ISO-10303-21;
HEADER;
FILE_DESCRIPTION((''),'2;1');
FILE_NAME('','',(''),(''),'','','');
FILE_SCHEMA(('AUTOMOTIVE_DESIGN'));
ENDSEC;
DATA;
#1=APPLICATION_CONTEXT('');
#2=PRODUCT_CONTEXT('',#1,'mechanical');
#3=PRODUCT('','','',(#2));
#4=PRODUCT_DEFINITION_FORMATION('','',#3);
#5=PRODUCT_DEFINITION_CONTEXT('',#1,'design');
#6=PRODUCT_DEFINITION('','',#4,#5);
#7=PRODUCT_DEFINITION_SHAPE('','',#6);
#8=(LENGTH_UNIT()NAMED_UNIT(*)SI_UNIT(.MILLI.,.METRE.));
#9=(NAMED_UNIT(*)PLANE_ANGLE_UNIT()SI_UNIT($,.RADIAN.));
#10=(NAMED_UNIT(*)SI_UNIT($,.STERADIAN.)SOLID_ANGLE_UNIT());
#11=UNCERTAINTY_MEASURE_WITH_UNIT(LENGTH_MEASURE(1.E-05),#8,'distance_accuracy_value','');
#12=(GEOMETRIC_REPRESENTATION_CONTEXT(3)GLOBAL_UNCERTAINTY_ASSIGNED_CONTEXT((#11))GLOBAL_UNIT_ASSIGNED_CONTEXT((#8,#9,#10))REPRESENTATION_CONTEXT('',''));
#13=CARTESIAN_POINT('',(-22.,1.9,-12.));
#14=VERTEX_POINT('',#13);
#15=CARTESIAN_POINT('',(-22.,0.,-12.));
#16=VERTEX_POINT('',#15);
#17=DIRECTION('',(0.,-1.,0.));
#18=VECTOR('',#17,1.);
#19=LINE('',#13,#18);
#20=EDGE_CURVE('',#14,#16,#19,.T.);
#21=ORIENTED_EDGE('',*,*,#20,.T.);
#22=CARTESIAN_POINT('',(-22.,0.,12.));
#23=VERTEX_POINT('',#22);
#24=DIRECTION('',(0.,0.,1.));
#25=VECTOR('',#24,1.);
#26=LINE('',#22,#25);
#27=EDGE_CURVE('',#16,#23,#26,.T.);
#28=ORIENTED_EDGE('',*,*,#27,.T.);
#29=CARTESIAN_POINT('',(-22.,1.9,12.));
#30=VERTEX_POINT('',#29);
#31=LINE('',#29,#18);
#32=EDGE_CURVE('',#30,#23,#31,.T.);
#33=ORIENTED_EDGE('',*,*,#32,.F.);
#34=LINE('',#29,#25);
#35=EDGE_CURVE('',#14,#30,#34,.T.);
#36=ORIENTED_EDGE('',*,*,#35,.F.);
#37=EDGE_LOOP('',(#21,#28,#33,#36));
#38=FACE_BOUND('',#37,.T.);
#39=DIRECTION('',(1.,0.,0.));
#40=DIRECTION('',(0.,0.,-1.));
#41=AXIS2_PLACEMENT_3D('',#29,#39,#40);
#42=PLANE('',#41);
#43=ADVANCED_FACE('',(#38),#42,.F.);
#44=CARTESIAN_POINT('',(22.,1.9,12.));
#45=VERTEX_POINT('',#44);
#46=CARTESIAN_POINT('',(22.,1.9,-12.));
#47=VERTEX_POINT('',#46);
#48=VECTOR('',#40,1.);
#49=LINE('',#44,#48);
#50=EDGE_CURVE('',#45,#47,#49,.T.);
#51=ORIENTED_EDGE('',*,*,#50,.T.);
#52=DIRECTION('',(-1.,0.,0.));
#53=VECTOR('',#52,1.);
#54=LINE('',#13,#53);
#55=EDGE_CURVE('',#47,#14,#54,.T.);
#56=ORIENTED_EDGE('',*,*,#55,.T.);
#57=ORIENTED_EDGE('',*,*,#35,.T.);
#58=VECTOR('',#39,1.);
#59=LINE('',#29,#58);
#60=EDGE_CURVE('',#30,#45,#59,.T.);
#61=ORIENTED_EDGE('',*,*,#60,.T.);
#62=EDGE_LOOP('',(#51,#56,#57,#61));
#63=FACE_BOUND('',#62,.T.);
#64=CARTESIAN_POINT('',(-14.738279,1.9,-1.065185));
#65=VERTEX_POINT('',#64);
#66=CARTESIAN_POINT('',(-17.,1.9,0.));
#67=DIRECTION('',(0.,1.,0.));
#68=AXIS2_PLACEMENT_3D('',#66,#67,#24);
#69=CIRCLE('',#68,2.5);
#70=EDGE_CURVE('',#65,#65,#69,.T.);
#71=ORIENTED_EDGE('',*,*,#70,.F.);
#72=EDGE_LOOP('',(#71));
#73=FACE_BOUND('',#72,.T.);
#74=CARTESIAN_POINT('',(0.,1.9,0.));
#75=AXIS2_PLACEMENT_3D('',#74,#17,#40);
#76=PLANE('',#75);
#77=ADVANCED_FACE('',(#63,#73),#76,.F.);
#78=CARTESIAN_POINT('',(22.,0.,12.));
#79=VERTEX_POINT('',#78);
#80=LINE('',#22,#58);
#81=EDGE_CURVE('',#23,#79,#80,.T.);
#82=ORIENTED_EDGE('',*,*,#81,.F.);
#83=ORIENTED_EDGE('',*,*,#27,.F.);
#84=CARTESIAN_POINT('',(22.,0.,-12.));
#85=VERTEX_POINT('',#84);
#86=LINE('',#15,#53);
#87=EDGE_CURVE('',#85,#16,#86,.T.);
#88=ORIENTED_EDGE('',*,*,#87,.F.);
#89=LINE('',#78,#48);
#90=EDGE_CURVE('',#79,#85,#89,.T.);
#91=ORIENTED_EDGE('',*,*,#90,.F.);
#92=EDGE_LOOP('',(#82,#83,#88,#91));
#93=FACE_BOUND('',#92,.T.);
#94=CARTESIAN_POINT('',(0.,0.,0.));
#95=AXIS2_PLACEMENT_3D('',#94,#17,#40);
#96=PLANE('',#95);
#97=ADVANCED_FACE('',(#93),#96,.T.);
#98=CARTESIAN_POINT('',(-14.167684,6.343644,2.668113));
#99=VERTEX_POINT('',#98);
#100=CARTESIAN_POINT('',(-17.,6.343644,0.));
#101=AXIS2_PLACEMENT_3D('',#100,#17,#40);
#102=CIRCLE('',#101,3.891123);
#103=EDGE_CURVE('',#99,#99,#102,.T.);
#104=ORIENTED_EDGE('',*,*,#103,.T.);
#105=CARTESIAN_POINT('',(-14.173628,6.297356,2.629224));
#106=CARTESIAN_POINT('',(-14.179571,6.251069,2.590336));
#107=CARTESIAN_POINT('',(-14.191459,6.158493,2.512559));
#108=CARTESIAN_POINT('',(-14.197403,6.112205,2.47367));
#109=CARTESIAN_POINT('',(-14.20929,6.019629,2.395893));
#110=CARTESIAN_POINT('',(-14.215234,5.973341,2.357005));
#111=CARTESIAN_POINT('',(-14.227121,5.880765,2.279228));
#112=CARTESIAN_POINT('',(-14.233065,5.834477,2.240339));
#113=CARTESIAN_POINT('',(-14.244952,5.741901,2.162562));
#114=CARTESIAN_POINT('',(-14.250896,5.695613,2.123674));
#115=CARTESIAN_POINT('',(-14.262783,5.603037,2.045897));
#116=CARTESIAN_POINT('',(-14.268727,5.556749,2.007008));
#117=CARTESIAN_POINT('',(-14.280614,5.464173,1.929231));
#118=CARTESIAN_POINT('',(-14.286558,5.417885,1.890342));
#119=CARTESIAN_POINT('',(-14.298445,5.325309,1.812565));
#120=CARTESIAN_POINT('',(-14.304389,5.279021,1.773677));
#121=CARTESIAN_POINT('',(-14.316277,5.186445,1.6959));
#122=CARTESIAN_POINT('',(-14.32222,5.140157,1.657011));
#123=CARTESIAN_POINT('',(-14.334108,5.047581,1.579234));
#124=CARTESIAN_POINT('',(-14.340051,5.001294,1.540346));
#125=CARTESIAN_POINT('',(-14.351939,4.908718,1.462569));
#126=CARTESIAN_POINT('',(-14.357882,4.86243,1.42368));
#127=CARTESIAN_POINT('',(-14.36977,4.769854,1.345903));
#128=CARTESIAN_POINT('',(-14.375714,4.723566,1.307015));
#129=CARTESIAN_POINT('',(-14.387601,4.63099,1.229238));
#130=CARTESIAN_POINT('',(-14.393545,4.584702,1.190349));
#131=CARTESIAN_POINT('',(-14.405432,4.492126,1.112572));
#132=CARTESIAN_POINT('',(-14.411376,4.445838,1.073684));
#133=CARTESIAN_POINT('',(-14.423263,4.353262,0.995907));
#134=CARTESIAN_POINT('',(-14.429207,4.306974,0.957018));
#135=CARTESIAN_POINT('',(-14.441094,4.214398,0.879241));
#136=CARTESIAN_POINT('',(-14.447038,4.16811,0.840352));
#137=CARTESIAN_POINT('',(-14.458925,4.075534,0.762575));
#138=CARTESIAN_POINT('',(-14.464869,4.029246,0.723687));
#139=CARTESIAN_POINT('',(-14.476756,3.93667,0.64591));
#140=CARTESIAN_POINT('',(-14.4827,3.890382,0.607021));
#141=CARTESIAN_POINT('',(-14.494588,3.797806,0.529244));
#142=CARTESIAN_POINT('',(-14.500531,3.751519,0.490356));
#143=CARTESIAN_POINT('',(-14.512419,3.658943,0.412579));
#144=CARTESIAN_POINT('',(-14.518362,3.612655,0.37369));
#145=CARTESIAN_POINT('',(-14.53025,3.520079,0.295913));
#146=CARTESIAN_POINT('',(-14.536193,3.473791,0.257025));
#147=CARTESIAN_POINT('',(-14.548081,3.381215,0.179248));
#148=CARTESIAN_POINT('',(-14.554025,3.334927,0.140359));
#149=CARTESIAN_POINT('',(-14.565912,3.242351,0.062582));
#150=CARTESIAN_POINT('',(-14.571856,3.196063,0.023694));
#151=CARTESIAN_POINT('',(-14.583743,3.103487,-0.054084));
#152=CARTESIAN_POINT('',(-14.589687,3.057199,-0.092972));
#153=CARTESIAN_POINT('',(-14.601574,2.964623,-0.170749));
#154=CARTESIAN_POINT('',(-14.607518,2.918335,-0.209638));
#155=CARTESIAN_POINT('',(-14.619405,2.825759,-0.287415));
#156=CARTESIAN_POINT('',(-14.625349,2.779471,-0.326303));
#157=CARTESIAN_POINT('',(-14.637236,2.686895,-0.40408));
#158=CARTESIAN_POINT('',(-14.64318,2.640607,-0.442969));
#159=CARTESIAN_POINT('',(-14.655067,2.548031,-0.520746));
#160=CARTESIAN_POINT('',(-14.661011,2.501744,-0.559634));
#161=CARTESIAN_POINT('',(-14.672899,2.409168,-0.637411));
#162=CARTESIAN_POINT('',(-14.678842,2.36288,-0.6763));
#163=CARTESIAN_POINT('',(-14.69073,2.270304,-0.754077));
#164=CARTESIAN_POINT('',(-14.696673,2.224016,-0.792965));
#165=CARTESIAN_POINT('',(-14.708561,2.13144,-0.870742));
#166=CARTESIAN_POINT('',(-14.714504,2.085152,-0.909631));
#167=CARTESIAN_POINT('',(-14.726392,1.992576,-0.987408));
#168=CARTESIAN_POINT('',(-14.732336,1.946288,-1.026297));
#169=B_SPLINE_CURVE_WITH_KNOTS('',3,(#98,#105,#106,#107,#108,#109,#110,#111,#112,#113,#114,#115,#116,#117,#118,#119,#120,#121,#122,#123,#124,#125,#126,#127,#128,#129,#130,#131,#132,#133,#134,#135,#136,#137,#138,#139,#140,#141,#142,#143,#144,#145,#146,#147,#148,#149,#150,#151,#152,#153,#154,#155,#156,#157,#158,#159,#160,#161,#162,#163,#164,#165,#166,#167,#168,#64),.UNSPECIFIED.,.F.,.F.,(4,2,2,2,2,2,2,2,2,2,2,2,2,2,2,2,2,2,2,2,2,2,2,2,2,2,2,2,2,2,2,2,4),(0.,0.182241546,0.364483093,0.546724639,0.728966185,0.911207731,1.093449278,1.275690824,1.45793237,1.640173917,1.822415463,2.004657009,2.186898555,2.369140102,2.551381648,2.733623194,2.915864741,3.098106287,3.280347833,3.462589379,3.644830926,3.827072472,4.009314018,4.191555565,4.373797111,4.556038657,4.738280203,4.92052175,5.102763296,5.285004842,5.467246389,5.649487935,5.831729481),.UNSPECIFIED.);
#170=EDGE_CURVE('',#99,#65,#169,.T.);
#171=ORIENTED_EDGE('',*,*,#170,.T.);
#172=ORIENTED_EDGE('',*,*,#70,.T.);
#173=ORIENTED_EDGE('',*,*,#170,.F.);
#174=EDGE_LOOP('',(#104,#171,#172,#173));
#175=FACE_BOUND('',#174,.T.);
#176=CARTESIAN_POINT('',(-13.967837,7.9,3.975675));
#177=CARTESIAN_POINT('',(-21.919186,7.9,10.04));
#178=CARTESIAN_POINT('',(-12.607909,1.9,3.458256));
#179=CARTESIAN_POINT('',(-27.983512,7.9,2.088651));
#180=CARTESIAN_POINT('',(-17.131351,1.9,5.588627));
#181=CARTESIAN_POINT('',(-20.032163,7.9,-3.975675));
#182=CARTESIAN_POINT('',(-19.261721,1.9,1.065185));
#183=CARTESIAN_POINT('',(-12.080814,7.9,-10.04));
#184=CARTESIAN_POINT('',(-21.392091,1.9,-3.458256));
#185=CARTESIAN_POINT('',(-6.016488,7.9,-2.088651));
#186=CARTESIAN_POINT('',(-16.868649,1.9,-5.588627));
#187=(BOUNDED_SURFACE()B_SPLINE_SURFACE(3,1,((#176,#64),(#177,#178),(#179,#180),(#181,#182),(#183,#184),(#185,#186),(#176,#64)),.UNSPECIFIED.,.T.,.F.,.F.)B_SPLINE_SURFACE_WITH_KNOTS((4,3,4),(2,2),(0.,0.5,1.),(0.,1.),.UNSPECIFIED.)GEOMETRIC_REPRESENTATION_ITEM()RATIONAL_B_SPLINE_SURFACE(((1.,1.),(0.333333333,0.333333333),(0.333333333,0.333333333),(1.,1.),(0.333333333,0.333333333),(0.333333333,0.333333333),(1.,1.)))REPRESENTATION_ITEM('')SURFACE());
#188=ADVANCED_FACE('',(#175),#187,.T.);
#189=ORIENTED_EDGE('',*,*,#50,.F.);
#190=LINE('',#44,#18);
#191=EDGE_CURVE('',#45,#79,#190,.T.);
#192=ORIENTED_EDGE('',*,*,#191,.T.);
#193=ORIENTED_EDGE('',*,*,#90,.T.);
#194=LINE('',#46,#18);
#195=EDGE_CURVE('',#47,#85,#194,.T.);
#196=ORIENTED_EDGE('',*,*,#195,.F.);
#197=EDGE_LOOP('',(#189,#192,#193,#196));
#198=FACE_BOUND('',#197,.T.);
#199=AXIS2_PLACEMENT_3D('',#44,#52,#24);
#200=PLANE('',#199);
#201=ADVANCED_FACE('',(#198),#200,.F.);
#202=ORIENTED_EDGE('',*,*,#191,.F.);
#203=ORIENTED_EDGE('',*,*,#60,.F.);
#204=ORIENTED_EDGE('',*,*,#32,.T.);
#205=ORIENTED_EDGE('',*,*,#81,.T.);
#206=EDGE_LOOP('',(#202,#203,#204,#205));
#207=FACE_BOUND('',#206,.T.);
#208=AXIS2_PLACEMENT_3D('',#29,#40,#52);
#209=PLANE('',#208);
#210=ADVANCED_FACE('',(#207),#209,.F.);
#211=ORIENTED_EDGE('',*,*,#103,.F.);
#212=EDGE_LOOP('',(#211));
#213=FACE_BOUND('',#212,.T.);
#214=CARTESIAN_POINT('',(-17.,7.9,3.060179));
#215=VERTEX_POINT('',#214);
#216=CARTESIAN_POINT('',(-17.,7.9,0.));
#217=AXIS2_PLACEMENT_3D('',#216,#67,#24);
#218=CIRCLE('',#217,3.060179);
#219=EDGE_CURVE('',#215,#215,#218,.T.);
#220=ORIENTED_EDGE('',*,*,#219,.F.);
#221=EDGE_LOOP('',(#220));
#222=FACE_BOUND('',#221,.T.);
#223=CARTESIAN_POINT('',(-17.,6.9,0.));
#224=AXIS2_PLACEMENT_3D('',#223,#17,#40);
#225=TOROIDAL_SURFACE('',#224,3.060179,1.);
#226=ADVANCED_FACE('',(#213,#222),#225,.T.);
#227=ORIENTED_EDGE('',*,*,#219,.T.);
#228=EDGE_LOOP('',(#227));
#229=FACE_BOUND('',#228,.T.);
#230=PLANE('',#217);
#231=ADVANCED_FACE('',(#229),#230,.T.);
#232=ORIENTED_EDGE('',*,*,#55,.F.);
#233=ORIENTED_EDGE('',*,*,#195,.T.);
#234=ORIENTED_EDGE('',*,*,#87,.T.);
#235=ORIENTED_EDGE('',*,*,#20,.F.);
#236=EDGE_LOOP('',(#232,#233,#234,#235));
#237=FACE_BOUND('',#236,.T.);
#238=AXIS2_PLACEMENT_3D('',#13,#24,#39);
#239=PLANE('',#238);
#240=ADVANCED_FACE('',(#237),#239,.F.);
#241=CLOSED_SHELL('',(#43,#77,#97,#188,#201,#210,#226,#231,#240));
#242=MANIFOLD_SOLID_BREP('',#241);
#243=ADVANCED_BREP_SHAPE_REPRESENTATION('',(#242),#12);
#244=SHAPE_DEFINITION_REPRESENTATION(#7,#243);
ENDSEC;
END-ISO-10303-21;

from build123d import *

# Parameters (mm, degrees)
SKETCH1_W           = 44
SKETCH1_H           = 24
BOSS_EXTRUDE1_DEPTH = 1.9
FILLET1_R           = 1


with BuildPart() as part:
    # Sketch1 → Boss-Extrude1 (new body)
    with BuildSketch(Plane(origin=(0, 0, 0), x_dir=(1, 0, 0), z_dir=(0, 1, 0))):
        Rectangle(SKETCH1_W, SKETCH1_H)
    extrude(amount=BOSS_EXTRUDE1_DEPTH)

    # Loft2: read off the stored shape, not the designer's step
    # Loft2: loft between two sections, ruled curve by curve
    loft2_from = [
        Edge.make_bspline([(-13.96783709, 7.9, 3.975674545), (-21.919186181, 7.9, 10.040000365), (-27.983512, 7.9, 2.088651274), (-20.03216291, 7.9, -3.975674545), (-12.080813819, 7.9, -10.040000365), (-6.016488, 7.9, -2.088651274), (-13.96783709, 7.9, 3.975674545)], [0, 0, 0, 0, 0.5, 0.5, 0.5, 1, 1, 1, 1], 3, [1, 0.333333333, 0.333333333, 1, 0.333333333, 0.333333333, 1]),
    ]
    loft2_to = [
        Edge.make_bspline([(-14.73827925, 1.9, -1.065185077), (-12.607909097, 1.9, 3.458256424), (-17.131350597, 1.9, 5.588626577), (-19.26172075, 1.9, 1.065185077), (-21.392090903, 1.9, -3.458256424), (-16.868649403, 1.9, -5.588626577), (-14.73827925, 1.9, -1.065185077)], [0, 0, 0, 0, 0.5, 0.5, 0.5, 1, 1, 1, 1], 3, [1, 0.333333333, 0.333333333, 1, 0.333333333, 0.333333333, 1]),
    ]
    loft2 = Solid(Shell([*[Face.make_surface_from_curves(loft2_from[k], loft2_to[k]) for k in range(1)], Face(Wire(loft2_from)), Face(Wire(loft2_to))]))
    add(loft2)

    # Fillet1
    fillet1_edges = [part.edges().sort_by_distance(p)[0] for p in [
        (-20.03216291, 7.9, -3.975674545),
    ]]
    fillet(fillet1_edges, radius=FILLET1_R)


solid = part.part
